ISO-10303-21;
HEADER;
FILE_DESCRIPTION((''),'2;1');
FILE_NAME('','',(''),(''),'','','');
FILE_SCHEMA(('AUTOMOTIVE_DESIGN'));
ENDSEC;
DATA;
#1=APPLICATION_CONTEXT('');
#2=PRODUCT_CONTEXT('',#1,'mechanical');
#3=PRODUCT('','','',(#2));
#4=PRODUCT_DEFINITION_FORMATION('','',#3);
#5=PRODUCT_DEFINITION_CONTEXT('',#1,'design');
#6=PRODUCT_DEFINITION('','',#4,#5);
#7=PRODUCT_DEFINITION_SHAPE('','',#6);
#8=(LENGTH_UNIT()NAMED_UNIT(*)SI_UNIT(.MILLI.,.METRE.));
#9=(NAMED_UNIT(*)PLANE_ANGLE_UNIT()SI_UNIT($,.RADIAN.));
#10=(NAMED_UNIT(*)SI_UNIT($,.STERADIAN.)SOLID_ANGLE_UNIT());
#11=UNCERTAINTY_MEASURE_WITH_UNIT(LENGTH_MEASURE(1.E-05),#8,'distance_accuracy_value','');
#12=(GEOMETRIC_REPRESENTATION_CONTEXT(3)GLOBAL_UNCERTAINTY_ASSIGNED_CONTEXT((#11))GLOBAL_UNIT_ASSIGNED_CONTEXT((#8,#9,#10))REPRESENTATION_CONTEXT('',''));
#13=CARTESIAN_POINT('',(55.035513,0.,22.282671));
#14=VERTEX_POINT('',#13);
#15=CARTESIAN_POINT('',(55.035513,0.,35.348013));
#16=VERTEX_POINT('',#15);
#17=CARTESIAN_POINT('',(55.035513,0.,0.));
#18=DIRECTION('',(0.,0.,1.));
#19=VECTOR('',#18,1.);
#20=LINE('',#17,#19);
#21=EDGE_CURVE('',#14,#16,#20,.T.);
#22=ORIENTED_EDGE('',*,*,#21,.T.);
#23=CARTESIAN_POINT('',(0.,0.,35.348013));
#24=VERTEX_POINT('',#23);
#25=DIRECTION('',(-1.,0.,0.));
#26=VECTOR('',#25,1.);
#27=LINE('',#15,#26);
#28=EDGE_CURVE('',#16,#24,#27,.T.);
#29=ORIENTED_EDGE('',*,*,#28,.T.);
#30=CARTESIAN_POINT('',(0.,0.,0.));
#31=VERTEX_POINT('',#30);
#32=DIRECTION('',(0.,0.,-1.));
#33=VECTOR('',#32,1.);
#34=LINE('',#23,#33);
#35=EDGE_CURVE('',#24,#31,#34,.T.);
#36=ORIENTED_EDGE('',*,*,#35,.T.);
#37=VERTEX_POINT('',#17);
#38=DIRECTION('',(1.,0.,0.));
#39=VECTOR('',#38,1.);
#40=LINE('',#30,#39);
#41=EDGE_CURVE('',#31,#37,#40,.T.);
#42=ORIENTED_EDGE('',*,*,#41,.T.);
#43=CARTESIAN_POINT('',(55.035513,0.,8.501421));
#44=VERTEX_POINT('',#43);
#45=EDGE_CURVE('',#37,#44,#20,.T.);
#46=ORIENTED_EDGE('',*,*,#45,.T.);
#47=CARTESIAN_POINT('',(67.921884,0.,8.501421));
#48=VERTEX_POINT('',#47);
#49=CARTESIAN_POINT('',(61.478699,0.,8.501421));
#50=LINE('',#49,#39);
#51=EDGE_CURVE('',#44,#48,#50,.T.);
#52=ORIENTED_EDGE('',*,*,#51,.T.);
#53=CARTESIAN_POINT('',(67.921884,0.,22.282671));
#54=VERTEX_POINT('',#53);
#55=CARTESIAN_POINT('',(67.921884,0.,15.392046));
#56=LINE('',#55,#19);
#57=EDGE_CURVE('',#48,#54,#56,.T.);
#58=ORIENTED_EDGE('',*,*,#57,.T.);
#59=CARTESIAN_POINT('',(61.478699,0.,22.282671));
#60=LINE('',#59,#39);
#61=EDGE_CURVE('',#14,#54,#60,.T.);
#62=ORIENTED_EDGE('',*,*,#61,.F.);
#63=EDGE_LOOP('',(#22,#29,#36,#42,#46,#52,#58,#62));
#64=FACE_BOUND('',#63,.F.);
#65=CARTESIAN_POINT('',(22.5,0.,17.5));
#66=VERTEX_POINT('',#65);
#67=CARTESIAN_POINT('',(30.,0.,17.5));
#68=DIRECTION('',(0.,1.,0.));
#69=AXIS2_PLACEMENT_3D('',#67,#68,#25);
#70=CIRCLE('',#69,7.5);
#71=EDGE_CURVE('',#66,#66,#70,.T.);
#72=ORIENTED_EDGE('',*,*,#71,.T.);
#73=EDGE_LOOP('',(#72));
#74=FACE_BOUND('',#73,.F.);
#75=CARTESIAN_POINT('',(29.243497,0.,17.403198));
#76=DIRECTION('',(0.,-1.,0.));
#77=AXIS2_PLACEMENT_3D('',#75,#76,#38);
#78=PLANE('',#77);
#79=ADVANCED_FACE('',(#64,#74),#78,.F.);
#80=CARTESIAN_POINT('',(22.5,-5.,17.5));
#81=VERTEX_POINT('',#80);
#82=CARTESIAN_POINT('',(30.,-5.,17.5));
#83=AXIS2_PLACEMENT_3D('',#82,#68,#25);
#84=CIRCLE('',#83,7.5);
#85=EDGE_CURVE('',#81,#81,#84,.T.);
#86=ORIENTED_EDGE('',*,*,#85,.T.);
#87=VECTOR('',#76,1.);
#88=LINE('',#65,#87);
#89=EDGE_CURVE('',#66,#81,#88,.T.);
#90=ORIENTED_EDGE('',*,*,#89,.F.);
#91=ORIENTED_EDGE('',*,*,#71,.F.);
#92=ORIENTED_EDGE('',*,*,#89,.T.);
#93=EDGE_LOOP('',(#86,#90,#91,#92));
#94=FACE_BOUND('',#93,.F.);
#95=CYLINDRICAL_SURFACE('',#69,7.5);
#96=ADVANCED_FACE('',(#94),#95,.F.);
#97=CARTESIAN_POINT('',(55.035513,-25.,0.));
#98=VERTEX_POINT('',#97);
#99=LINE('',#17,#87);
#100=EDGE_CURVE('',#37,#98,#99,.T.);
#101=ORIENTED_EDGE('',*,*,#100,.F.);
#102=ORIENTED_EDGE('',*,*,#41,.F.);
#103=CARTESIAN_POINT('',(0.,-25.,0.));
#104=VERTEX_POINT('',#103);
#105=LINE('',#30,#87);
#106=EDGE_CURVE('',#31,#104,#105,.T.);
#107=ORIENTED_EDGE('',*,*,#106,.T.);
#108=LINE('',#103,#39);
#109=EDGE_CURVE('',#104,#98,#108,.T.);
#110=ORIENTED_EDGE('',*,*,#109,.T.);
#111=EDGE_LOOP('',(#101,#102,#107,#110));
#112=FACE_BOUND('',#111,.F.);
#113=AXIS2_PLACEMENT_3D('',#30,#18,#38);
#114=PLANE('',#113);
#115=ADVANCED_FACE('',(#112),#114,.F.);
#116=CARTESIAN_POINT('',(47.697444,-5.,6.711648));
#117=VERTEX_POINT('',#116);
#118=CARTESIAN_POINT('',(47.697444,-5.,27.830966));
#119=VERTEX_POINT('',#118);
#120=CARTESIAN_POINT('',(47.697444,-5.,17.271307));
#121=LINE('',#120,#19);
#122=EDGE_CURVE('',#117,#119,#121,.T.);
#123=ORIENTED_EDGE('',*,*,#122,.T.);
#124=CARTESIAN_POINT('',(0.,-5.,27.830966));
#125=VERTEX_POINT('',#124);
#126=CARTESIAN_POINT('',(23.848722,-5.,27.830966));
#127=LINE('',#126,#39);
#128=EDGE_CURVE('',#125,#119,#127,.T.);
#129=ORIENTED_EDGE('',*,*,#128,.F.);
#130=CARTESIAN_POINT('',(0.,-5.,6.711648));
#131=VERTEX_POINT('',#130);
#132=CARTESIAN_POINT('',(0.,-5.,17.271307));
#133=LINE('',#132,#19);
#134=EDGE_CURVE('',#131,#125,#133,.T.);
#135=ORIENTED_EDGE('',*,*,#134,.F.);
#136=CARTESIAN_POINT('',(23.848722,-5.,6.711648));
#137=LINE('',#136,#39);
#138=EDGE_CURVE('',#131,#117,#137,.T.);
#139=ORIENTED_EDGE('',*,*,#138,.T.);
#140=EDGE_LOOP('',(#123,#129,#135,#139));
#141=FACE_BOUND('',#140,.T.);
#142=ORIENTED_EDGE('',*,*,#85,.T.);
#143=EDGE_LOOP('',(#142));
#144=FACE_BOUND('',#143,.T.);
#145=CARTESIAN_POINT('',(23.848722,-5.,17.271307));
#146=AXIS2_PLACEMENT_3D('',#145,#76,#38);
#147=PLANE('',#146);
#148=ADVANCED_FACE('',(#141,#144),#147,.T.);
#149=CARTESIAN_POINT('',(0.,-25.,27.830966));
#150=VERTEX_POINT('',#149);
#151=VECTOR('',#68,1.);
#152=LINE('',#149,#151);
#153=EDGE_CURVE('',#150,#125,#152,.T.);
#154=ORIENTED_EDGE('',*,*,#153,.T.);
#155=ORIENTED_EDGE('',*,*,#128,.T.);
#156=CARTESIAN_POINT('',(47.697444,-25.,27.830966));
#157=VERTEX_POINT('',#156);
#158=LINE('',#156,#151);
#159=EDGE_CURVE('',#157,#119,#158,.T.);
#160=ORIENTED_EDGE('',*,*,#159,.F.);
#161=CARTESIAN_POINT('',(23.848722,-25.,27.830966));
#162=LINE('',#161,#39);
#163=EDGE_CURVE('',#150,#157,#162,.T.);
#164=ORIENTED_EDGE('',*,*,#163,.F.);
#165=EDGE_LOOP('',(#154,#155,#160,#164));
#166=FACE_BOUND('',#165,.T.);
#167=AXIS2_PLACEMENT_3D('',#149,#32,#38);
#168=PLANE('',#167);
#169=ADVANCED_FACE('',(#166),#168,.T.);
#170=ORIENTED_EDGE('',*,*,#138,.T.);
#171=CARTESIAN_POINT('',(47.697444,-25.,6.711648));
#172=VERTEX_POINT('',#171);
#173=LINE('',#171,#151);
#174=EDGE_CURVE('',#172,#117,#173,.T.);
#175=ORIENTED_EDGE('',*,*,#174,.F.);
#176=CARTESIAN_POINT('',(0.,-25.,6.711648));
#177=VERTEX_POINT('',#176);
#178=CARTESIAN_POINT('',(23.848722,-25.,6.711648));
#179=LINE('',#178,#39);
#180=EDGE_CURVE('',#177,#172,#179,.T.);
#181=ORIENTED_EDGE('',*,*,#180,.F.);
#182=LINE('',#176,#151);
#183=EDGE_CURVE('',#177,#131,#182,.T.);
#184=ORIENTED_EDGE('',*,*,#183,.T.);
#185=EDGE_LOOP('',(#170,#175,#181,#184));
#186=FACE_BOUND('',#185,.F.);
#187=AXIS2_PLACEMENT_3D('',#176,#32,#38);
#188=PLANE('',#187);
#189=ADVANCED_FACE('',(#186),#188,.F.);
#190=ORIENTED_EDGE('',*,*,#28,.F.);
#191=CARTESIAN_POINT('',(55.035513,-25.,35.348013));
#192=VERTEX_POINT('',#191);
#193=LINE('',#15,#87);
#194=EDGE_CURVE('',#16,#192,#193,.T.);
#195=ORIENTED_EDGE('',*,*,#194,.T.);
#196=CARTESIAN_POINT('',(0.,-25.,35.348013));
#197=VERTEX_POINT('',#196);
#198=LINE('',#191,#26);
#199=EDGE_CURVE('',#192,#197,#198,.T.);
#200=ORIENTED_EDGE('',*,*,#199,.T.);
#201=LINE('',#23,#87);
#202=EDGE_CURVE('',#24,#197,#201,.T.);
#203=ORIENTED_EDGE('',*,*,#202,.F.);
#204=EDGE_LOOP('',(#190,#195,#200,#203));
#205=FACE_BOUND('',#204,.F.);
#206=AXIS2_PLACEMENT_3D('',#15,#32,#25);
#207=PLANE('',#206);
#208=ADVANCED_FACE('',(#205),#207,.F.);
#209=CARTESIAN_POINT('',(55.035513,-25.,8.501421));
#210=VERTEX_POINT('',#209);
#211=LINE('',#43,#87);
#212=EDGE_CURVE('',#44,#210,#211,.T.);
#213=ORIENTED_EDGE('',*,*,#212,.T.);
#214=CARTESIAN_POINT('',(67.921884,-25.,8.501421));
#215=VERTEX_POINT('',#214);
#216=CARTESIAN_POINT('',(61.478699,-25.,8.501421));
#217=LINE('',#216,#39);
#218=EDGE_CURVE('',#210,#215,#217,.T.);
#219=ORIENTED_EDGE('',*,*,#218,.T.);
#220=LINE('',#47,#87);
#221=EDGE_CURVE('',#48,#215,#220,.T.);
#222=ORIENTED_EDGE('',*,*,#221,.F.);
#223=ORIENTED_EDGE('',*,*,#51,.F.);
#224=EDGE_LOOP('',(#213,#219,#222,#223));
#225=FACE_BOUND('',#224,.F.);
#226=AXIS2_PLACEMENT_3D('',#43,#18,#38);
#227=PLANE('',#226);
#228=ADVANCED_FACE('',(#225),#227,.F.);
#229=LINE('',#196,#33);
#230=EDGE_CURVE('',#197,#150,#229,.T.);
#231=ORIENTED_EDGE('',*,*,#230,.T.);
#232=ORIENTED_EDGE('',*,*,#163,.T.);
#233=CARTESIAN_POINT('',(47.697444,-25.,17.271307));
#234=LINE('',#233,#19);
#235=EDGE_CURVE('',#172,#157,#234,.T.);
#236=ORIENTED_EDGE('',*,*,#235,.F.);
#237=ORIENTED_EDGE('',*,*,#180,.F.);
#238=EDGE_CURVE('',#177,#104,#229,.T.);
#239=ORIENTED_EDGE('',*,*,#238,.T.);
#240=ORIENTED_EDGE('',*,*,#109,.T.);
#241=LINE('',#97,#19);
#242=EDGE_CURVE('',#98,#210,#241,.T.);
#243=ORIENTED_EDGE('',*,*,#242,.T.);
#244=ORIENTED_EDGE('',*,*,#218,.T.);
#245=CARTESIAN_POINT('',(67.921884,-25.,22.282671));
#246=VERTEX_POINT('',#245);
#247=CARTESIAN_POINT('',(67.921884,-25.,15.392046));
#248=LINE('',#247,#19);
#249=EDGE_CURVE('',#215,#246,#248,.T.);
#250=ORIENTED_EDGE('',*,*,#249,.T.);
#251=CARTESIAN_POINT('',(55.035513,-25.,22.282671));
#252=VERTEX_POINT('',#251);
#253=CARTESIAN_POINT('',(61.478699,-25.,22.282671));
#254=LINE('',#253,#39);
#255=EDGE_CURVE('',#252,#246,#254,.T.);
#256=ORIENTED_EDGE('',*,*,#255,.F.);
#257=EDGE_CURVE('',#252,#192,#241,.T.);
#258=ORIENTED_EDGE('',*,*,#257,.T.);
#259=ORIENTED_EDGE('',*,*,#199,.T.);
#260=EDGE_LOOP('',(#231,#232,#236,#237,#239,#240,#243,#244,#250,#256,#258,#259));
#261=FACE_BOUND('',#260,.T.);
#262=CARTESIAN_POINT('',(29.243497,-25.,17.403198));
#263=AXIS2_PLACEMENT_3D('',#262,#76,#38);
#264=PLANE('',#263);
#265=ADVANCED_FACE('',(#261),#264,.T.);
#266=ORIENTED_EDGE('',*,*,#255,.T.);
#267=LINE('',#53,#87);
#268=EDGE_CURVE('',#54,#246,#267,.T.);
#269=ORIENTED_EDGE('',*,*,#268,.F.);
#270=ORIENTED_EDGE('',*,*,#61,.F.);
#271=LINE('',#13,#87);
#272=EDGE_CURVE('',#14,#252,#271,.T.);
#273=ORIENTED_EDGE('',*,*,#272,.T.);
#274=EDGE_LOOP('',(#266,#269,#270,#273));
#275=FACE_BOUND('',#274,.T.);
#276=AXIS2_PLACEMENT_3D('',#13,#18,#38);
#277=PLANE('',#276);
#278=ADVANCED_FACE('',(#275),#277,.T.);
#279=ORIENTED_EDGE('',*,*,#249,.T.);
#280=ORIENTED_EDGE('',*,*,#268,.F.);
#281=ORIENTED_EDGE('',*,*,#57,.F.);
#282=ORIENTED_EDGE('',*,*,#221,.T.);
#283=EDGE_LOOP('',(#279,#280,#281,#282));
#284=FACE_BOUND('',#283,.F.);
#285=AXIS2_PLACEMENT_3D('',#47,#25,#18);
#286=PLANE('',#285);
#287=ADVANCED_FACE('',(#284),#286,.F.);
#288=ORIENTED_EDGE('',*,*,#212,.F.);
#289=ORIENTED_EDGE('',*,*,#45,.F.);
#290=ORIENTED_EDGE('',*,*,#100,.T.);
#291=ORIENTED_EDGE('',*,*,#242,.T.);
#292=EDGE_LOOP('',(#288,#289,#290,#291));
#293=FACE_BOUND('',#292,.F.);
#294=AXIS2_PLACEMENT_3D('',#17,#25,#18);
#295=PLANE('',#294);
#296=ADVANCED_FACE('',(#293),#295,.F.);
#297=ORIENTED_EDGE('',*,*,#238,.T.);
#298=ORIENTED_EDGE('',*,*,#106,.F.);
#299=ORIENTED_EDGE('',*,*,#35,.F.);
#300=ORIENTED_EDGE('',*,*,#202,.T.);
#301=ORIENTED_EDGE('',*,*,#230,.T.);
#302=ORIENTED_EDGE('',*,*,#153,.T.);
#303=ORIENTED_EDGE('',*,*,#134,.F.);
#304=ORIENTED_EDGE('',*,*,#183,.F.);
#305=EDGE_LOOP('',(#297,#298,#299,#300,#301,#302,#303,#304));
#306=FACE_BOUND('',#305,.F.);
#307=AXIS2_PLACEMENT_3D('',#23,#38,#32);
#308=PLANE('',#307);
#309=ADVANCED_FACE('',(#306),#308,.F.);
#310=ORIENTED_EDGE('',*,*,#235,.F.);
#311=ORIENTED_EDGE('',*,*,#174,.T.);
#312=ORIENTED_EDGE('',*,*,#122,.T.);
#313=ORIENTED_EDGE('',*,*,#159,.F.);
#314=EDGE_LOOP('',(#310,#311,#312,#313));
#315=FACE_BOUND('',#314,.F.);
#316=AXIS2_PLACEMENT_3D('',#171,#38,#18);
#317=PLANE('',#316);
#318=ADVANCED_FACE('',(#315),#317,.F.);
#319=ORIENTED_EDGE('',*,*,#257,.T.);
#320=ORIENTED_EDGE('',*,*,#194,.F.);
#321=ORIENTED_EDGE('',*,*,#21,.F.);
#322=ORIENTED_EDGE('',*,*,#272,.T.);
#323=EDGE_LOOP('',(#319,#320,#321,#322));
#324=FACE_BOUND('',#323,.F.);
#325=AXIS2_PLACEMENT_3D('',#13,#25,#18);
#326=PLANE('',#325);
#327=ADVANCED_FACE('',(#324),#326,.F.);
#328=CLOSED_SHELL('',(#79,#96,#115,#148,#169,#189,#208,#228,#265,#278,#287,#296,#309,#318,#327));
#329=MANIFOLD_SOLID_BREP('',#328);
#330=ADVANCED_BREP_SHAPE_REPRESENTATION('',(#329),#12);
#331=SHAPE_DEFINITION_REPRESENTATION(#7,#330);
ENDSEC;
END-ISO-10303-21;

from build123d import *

# Parameters (mm, degrees)
F0_W     = 12.1704526246
F0_H     = 13.7812504545
F0_W_2   = 12.8863714635
F1_DEPTH = 25
F2_W     = 47.6974435151
F2_H     = 21.1193179712
F3_DEPTH = 20
F4_R     = 7.5
F5_DEPTH = 25


with BuildPart() as f1:
    # F0 (on Front) → F1 (new body)
    with BuildSketch(Plane.XZ):
        Polygon((0, 35.3480130434), (0, 0), (55.0355128944, 0), (55.0355128944, 8.5014207289), (42.8650602698, 8.5014207289), (42.8650602698, 22.2826711833), (55.0355128944, 22.2826711833), (55.0355128944, 35.3480130434), align=None)
        with Locations((48.9502865821, 15.3920459561)):
            Rectangle(F0_W, F0_H)
        with Locations((61.4786986262, 15.3920459561)):
            Rectangle(F0_W_2, F0_H)
    extrude(amount=F1_DEPTH)

    # F2 (on face) → F3 (cut)
    with BuildSketch(Plane.XZ.offset(25)):
        with Locations((23.8487217575, 17.2713068314)):
            Rectangle(F2_W, F2_H)
    extrude(amount=-F3_DEPTH, mode=Mode.SUBTRACT)

    # F4 (on face) → F5 (cut)
    with BuildSketch(Plane(origin=(0, 0, 0), x_dir=(-1, 0, 0), z_dir=(0, 1, 0))):
        with Locations((-30, 17.5)):
            Circle(F4_R)
    extrude(amount=-F5_DEPTH, mode=Mode.SUBTRACT)


solid = f1.part
